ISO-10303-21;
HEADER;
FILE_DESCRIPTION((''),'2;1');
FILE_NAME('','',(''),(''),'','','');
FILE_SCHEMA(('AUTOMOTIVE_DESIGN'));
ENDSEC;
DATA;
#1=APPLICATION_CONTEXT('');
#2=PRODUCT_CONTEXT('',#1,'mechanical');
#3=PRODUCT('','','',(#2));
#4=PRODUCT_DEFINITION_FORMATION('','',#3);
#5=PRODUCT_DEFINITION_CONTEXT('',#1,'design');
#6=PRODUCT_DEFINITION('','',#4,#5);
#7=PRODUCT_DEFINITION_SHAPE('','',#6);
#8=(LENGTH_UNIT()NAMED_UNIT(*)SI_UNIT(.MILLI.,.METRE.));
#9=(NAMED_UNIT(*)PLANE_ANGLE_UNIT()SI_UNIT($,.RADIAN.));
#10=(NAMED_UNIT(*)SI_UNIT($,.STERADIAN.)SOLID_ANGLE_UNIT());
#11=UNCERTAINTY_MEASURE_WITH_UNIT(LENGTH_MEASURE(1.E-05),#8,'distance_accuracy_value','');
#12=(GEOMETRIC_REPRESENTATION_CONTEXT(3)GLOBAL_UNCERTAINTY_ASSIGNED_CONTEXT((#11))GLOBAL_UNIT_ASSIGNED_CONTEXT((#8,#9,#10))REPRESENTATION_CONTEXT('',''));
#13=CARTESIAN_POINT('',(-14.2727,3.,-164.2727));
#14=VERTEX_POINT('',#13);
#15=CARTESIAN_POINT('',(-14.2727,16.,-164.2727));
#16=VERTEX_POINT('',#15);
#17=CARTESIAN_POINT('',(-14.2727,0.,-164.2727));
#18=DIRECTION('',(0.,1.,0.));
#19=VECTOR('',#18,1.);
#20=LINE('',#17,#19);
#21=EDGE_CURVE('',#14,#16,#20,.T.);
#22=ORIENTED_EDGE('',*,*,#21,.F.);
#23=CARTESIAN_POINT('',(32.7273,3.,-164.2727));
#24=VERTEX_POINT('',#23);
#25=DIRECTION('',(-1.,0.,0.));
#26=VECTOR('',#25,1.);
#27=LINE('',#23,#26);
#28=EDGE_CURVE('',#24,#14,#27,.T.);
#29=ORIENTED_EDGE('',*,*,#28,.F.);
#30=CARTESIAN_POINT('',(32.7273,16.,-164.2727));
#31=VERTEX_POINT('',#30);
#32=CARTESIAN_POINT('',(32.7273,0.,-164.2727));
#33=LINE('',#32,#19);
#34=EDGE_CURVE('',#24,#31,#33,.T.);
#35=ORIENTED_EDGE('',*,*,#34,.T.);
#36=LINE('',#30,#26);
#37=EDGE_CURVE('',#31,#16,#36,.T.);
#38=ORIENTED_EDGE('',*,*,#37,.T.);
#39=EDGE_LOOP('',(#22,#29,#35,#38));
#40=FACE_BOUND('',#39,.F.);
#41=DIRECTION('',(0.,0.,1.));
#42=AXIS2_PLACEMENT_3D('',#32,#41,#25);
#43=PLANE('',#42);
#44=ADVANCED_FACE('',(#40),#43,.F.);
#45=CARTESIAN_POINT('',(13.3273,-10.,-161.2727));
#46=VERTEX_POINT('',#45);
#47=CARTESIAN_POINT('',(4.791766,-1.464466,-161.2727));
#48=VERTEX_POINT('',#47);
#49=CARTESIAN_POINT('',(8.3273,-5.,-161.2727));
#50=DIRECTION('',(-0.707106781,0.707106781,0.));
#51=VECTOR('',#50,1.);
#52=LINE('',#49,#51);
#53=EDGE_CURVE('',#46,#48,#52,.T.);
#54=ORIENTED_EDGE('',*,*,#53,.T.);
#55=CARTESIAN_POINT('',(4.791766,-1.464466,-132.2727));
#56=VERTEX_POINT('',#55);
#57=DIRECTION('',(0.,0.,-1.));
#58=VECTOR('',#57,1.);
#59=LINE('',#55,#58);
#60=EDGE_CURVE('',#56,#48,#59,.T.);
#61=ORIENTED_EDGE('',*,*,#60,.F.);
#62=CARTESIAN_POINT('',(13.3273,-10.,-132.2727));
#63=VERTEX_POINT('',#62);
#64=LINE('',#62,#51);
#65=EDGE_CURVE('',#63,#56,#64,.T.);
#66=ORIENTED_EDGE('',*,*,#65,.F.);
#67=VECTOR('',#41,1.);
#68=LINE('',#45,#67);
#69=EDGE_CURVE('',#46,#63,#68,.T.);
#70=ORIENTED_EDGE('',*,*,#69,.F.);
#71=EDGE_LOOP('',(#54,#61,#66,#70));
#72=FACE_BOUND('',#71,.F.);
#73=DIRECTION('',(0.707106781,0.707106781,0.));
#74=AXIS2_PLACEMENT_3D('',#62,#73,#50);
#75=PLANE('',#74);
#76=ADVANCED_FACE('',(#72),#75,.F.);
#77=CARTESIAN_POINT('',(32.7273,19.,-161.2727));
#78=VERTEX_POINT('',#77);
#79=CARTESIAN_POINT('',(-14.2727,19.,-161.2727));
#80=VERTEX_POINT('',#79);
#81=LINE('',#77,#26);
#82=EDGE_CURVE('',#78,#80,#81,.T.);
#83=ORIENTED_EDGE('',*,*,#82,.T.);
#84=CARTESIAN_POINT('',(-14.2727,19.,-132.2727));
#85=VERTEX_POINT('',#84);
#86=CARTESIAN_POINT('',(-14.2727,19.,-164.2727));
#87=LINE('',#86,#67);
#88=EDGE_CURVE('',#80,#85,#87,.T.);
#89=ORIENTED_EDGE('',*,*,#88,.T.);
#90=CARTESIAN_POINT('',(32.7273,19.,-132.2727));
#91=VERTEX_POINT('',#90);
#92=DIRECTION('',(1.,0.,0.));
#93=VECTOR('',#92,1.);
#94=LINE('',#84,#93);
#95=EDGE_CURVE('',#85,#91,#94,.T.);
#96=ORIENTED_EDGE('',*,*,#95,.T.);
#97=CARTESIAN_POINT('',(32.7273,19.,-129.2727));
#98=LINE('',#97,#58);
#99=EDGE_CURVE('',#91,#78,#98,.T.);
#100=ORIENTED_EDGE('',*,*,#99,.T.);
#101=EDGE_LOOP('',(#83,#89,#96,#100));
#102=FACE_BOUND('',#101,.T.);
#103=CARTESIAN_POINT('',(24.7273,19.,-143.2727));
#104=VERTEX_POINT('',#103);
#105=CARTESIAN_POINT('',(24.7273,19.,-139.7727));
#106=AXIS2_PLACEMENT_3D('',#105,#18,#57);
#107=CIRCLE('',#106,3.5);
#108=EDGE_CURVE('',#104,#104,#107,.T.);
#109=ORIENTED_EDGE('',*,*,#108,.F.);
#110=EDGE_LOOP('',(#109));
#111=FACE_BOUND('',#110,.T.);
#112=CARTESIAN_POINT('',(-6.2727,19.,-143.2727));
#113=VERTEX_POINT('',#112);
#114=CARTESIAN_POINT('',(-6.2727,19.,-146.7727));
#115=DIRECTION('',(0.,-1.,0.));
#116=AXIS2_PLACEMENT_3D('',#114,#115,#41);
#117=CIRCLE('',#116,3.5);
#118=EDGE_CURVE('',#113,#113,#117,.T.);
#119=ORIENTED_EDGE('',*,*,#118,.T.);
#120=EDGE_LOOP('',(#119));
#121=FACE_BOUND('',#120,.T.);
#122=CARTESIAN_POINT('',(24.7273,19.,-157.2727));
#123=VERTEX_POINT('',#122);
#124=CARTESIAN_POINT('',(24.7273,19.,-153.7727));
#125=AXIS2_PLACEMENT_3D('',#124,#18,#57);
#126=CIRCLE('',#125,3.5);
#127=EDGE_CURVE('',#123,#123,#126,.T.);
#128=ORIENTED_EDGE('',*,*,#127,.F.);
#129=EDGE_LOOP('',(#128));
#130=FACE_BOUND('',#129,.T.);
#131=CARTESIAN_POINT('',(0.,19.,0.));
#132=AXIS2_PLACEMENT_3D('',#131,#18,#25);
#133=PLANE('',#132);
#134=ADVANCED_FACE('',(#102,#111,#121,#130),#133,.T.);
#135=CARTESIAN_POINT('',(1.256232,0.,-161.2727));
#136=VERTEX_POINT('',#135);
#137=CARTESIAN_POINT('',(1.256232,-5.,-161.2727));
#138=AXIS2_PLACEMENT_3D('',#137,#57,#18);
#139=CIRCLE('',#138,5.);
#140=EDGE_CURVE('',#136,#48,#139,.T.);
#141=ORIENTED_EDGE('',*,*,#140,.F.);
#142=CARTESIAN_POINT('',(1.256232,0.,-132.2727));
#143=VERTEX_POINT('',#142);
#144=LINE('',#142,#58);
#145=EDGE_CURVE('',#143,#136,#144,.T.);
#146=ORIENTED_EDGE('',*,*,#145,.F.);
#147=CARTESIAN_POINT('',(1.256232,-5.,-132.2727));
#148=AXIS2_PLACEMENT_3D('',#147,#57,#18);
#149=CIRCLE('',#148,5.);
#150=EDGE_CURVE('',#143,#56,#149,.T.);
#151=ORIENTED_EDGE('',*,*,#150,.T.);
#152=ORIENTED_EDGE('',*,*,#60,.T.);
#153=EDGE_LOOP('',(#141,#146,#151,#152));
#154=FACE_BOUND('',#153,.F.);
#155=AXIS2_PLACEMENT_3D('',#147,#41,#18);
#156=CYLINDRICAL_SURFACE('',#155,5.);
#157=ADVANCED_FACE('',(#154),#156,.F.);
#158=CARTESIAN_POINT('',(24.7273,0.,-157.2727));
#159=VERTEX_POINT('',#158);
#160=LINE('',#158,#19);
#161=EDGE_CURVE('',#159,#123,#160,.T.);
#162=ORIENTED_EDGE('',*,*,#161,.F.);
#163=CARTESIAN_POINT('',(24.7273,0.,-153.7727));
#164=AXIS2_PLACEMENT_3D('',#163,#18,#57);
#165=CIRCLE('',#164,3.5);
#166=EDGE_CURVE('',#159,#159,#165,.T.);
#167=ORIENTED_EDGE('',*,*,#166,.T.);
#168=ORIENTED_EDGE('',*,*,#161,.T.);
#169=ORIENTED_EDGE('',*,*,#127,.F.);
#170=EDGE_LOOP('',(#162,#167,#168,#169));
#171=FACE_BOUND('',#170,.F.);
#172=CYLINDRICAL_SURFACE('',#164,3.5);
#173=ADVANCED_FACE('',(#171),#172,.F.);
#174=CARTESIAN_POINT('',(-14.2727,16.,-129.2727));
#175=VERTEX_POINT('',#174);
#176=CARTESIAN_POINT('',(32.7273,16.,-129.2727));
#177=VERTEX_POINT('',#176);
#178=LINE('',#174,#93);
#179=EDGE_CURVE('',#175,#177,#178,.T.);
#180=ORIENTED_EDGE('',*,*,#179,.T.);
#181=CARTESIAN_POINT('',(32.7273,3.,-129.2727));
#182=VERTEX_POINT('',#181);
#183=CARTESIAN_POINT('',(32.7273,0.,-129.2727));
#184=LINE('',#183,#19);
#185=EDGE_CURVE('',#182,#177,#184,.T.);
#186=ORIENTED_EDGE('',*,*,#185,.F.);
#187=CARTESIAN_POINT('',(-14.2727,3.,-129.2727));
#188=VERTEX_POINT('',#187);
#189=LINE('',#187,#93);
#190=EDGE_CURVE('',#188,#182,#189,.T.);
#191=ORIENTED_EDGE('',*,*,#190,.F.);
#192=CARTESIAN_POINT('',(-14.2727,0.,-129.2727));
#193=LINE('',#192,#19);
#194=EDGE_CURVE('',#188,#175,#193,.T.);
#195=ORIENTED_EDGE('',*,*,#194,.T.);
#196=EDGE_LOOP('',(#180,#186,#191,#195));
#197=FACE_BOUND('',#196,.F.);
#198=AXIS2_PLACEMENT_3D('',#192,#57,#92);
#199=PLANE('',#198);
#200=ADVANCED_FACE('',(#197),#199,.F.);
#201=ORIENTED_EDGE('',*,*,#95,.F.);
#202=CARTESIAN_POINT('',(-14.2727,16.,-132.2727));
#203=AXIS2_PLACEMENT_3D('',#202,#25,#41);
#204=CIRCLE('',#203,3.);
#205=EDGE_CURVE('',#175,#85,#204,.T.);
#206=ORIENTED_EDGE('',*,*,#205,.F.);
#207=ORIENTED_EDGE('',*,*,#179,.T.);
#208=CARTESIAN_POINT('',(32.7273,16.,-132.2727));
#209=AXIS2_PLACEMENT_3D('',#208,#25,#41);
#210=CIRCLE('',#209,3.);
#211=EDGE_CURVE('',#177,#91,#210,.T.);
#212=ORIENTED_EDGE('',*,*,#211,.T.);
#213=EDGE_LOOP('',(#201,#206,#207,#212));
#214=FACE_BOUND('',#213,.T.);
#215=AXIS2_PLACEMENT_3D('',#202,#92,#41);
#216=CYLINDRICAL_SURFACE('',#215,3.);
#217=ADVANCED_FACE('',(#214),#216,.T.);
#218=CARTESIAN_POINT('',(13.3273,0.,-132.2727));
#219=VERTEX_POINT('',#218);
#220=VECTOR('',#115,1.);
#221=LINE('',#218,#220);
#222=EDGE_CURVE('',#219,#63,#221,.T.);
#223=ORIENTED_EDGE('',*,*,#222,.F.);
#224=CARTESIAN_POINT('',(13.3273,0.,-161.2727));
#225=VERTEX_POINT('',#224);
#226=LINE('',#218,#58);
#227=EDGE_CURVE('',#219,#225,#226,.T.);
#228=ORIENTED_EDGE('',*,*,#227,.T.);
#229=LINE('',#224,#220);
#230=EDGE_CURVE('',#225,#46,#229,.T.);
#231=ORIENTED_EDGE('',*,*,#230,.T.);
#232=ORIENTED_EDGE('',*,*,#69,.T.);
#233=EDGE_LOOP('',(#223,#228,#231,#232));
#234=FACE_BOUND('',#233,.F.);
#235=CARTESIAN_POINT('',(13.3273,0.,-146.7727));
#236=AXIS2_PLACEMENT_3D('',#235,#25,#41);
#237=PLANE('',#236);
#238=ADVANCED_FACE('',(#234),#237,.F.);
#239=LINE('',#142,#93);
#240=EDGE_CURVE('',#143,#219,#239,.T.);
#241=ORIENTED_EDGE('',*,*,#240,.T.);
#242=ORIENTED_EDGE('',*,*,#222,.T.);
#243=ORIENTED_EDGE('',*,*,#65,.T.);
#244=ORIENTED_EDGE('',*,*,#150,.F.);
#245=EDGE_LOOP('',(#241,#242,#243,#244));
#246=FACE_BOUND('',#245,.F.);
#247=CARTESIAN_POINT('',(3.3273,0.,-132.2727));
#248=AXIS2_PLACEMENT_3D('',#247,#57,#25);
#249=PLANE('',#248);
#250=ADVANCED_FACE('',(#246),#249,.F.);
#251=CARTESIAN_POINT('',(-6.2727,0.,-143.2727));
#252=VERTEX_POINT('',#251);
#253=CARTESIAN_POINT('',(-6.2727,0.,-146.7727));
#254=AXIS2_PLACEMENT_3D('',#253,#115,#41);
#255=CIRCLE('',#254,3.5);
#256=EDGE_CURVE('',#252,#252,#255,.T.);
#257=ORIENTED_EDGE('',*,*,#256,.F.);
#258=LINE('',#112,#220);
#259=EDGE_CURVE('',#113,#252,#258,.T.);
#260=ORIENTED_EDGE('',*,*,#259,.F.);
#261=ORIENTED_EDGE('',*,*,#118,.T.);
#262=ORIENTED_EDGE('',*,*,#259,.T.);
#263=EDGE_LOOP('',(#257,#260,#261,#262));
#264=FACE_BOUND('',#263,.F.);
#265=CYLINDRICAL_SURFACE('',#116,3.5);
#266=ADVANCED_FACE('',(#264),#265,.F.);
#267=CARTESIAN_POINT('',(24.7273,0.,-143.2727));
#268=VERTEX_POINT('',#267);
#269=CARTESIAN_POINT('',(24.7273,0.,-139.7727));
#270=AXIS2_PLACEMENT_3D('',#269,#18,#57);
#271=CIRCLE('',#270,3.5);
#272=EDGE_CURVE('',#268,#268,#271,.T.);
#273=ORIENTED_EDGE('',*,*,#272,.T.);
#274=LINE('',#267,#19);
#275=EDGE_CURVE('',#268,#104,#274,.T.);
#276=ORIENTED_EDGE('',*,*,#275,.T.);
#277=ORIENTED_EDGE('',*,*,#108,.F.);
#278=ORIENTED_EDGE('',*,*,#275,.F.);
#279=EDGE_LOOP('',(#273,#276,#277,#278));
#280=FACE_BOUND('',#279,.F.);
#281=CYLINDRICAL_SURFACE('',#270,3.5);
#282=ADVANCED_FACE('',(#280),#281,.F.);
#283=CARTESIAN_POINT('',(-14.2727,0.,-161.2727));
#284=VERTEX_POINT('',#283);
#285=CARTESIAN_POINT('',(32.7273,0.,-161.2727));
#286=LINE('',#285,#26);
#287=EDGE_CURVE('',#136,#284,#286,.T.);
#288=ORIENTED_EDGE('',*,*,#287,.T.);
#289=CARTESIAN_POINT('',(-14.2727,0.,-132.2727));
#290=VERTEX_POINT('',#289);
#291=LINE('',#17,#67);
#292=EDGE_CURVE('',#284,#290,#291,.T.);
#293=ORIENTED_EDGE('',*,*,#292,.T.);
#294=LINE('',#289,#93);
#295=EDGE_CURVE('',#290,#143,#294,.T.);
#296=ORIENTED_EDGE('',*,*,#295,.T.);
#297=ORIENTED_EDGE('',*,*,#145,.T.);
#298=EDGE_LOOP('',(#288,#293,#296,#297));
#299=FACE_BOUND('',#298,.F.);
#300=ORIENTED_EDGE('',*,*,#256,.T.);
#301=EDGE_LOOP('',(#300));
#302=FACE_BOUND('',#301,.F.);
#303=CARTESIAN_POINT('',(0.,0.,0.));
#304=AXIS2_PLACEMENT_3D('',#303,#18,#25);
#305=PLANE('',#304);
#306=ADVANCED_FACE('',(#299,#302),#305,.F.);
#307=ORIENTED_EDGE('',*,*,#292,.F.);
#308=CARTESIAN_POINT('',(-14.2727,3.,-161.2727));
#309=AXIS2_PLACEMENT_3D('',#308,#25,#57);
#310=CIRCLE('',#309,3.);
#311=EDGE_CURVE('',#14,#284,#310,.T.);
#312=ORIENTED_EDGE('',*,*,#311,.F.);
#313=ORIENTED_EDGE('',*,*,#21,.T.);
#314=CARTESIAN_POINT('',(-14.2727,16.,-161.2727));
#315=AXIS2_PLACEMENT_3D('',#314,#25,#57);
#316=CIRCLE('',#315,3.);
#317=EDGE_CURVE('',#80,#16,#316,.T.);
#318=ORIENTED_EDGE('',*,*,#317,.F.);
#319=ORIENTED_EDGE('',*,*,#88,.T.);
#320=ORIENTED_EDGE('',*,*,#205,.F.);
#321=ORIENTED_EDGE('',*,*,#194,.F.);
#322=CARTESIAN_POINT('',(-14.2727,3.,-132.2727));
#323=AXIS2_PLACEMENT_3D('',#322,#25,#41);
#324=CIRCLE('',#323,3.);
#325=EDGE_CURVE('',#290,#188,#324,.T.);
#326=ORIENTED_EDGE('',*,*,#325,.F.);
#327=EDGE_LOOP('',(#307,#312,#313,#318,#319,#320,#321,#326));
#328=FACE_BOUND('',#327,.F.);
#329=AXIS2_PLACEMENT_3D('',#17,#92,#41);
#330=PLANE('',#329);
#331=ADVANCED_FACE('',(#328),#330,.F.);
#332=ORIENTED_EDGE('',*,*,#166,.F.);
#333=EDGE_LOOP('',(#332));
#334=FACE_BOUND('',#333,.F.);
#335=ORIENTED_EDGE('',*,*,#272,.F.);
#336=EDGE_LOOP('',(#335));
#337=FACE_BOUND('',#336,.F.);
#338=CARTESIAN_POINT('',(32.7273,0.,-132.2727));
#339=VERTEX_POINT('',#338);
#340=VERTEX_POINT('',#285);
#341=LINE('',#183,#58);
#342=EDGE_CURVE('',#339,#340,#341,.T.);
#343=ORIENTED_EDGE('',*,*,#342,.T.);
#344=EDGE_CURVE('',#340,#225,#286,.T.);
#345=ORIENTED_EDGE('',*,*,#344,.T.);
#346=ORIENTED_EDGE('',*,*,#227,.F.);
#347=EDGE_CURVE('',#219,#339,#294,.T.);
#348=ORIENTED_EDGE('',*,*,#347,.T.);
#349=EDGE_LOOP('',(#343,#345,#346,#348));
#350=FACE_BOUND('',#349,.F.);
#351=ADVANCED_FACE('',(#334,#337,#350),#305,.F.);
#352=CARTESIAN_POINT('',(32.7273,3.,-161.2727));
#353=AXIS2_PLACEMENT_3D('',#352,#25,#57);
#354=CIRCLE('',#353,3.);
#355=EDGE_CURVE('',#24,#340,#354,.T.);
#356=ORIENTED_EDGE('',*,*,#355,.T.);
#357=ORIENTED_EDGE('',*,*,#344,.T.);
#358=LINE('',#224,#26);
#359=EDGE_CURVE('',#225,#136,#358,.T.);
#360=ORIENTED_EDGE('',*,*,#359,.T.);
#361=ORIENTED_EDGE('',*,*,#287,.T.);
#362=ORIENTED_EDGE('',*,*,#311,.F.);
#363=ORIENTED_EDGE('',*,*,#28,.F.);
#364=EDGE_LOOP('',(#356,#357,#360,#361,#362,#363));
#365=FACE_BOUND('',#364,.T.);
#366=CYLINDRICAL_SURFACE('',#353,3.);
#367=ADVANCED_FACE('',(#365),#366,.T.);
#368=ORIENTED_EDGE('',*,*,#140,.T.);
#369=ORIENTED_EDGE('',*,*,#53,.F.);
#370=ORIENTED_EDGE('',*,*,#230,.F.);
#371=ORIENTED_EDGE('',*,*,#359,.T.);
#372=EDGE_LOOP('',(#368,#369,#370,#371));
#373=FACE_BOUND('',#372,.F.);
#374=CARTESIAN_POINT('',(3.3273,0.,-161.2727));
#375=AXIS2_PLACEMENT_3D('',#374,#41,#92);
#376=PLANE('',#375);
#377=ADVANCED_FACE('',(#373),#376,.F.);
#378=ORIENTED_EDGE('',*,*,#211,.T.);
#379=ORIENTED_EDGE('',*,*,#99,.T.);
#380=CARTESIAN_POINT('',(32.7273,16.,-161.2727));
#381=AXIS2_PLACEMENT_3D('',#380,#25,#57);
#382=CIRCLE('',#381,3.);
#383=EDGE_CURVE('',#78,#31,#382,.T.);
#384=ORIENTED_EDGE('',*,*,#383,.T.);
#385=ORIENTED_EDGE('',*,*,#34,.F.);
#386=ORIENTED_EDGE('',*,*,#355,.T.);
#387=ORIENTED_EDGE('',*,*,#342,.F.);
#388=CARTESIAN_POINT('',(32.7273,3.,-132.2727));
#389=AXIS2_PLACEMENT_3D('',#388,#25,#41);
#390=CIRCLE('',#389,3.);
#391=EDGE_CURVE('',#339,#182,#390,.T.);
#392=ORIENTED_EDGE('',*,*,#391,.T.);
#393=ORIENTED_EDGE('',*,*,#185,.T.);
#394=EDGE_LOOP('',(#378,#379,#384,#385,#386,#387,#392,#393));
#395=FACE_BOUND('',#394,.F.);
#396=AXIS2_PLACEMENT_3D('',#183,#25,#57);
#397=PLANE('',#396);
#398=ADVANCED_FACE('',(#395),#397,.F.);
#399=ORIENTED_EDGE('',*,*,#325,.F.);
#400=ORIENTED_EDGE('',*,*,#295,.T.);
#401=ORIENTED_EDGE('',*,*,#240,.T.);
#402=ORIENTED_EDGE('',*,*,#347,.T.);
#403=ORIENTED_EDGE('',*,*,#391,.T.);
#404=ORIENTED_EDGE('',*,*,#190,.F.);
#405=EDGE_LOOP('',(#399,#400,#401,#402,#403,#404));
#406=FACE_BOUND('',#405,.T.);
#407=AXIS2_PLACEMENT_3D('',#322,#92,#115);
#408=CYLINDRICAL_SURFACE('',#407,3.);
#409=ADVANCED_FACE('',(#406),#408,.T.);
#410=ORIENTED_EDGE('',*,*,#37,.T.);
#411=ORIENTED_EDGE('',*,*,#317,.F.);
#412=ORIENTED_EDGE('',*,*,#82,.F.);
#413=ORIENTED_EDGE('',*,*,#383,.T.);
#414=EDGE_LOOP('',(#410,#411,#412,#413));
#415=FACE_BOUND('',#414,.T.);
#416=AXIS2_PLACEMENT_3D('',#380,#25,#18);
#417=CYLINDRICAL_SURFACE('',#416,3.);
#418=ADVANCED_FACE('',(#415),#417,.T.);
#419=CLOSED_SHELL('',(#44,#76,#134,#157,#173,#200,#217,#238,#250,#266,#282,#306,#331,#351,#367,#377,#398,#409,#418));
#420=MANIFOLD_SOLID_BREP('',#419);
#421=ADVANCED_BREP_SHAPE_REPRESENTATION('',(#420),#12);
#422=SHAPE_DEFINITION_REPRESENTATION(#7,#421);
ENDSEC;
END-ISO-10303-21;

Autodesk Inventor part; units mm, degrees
ref_plane "YZ Plane" through (0, 0, 0) normal (1, 0, 0) x (0, 1, 0)
ref_plane "XZ Plane" through (0, 0, 0) normal (0, 1, 0) x (-1, 0, 0)
ref_plane "XY Plane" through (0, 0, 0) normal (0, 0, 1) x (1, 0, 0)
sketch "Schizzo1" plane through (0, 0, 0) normal (0, 1, 0) x (-1, 0, 0)
  line L0 (14.2727, -129.2727) -> (-32.7273, -129.2727)
  line L1 (-32.7273, -129.2727) -> (-32.7273, -164.2727)
  line L2 (-32.7273, -164.2727) -> (14.2727, -164.2727)
  line L3 (14.2727, -164.2727) -> (14.2727, -129.2727)
  line L4 (14.2727, -129.2727) -> (-32.7273, -164.2727) construction
  line L5 (-32.7273, -129.2727) -> (14.2727, -164.2727) construction
  point P0 (0, 0)
  point P1 (-9.2273, -146.7727)
  dimension "d0" = 35
  dimension "d1" = 47
extrude "Estrusione1" add sketch "Schizzo1" along normal blind 19
sketch "Schizzo2" plane through (0, 0, 0) normal (0, -1, 0) x (1, 0, 0)
  line L0 (-14.2727, -129.2727) -> (32.7273, -129.2727) projected
  line L1 (32.7273, -129.2727) -> (32.7273, -164.2727) projected
  line L2 (32.7273, -129.2727) -> (32.7273, -164.2727)
  line L3 (32.7273, -146.7727) -> (24.7273, -146.7727)
  line L4 (32.7273, -146.7727) -> (24.7273, -146.7727) construction
  line L5 (24.7273, -146.7727) -> (52.7273, -146.7727) construction
  line L6 (24.7273, -146.7727) -> (24.7273, -153.7727)
  line L7 (24.7273, -146.7727) -> (31.7273, -146.7727) construction
  line L8 (24.7273, -146.7727) -> (24.7273, -139.7727)
  line L9 (24.7273, -146.7727) -> (31.7273, -146.7727) construction
  point P0 (0, 0)
  point P1 (0.7273, -147.0727)
  dimension "d4" = 8
  dimension "d5" = 180
  dimension "d19" = 7
  dimension "d20" = 90
  dimension "d21" = 7
  dimension "d22" = 90
hole "Foro1" at (24.7273, 0, -139.7727) at (24.7273, 0, -153.7727) direction (0, 1, 0) diameter 7 end through all clearance for "Vite a testa piana" size "M6" standard "ANSI - Profilo M Metrico"
fillet "Raccordo1" radius 3 1 edges at (9.2273, 19, -129.2727)
fillet "Raccordo2" radius 3 1 edges at (9.2273, 19, -164.2727)
fillet "Raccordo3" radius 3 1 edges at (9.2273, 0, -164.2727)
fillet "Raccordo4" radius 3 1 edges at (9.2273, 0, -129.2727)
sketch "Schizzo3" plane through (0, 19, 0) normal (0, 1, 0) x (1, 0, 0)
  line L0 (32.7273, 146.7727) -> (-6.2727, 146.7727)
  line L1 (32.7273, 146.7727) -> (71.7273, 146.7727) construction
  line L2 (32.7273, 132.2727) -> (32.7273, 161.2727) projected
  point P0 (0, 0)
  dimension "d23" = 39
  dimension "d24" = 180
hole "Foro2" at (-6.2727, 19, -146.7727) direction (0, -1, 0) diameter 7 end through all clearance for "Vite a testa piana" size "M6" standard "ANSI - Profilo M Metrico"
sketch "Schizzo4" plane through (0, 0, 0) normal (0, -1, 0) x (1, 0, 0)
  line L0 (32.7273, -132.2727) -> (32.7273, -161.2727) projected
  line L1 (8, -215) -> (39.6, -215) construction
  line L2 (13.3273, -161.2727) -> (13.3273, -132.2727)
  line L3 (13.3273, -161.2727) -> (13.3273, -132.2727)
  line L4 (13.3273, -132.2727) -> (3.3273, -132.2727)
  line L5 (3.3273, -132.2727) -> (3.3273, -161.2727)
  line L6 (3.3273, -161.2727) -> (13.3273, -161.2727)
  line L7 (32.7273, -132.2727) -> (-14.2727, -132.2727) projected
  line L8 (78, -150) -> (86, -150) construction
  line L9 (32.7273, -146.7727) -> (24.7273, -146.7727)
  line L10 (32.7273, -146.7727) -> (40.7273, -146.7727) construction
  line L11 (24.7273, -146.7727) -> (13.3273, -146.7727)
  line L12 (24.7273, -146.7727) -> (36.1273, -146.7727) construction
  point P0 (0, 0)
  dimension "d35" = 29
  dimension "d36" = 10
  dimension "d44" = 8
  dimension "d45" = 180
  dimension "d46" = 11.4
  dimension "d47" = 180
extrude "Estrusione2" add sketch "Schizzo4" along normal blind 10 contours L2 L6 L5 L4
sketch "Schizzo5" plane through (3.3273, 0, -132.2727) normal (0, 0, 1) x (1, 0, 0)
  line L0 (10, 0) -> (10, -10) projected
  line L1 (10, 0) -> (0, 0) projected
  line L2 (10, -10) -> (0, 0)
  line L3 (0, -10) -> (10, -10) projected
  line L4 (0, 0) -> (0, -10) projected
  line L5 (10, -10) -> (0, -10)
  line L6 (0, -10) -> (0, 0)
  point P0 (-3.3273, 0)
extrude "Estrusione3" cut sketch "Schizzo5" against normal through all contours L3 L4 L2
fillet "Raccordo5" radius 5 1 edges at (3.3273, 0, -146.7727)
properties part number "22_Blocco_Escursione_Braccio" material "PLA(Stampato)(D0,646)"
